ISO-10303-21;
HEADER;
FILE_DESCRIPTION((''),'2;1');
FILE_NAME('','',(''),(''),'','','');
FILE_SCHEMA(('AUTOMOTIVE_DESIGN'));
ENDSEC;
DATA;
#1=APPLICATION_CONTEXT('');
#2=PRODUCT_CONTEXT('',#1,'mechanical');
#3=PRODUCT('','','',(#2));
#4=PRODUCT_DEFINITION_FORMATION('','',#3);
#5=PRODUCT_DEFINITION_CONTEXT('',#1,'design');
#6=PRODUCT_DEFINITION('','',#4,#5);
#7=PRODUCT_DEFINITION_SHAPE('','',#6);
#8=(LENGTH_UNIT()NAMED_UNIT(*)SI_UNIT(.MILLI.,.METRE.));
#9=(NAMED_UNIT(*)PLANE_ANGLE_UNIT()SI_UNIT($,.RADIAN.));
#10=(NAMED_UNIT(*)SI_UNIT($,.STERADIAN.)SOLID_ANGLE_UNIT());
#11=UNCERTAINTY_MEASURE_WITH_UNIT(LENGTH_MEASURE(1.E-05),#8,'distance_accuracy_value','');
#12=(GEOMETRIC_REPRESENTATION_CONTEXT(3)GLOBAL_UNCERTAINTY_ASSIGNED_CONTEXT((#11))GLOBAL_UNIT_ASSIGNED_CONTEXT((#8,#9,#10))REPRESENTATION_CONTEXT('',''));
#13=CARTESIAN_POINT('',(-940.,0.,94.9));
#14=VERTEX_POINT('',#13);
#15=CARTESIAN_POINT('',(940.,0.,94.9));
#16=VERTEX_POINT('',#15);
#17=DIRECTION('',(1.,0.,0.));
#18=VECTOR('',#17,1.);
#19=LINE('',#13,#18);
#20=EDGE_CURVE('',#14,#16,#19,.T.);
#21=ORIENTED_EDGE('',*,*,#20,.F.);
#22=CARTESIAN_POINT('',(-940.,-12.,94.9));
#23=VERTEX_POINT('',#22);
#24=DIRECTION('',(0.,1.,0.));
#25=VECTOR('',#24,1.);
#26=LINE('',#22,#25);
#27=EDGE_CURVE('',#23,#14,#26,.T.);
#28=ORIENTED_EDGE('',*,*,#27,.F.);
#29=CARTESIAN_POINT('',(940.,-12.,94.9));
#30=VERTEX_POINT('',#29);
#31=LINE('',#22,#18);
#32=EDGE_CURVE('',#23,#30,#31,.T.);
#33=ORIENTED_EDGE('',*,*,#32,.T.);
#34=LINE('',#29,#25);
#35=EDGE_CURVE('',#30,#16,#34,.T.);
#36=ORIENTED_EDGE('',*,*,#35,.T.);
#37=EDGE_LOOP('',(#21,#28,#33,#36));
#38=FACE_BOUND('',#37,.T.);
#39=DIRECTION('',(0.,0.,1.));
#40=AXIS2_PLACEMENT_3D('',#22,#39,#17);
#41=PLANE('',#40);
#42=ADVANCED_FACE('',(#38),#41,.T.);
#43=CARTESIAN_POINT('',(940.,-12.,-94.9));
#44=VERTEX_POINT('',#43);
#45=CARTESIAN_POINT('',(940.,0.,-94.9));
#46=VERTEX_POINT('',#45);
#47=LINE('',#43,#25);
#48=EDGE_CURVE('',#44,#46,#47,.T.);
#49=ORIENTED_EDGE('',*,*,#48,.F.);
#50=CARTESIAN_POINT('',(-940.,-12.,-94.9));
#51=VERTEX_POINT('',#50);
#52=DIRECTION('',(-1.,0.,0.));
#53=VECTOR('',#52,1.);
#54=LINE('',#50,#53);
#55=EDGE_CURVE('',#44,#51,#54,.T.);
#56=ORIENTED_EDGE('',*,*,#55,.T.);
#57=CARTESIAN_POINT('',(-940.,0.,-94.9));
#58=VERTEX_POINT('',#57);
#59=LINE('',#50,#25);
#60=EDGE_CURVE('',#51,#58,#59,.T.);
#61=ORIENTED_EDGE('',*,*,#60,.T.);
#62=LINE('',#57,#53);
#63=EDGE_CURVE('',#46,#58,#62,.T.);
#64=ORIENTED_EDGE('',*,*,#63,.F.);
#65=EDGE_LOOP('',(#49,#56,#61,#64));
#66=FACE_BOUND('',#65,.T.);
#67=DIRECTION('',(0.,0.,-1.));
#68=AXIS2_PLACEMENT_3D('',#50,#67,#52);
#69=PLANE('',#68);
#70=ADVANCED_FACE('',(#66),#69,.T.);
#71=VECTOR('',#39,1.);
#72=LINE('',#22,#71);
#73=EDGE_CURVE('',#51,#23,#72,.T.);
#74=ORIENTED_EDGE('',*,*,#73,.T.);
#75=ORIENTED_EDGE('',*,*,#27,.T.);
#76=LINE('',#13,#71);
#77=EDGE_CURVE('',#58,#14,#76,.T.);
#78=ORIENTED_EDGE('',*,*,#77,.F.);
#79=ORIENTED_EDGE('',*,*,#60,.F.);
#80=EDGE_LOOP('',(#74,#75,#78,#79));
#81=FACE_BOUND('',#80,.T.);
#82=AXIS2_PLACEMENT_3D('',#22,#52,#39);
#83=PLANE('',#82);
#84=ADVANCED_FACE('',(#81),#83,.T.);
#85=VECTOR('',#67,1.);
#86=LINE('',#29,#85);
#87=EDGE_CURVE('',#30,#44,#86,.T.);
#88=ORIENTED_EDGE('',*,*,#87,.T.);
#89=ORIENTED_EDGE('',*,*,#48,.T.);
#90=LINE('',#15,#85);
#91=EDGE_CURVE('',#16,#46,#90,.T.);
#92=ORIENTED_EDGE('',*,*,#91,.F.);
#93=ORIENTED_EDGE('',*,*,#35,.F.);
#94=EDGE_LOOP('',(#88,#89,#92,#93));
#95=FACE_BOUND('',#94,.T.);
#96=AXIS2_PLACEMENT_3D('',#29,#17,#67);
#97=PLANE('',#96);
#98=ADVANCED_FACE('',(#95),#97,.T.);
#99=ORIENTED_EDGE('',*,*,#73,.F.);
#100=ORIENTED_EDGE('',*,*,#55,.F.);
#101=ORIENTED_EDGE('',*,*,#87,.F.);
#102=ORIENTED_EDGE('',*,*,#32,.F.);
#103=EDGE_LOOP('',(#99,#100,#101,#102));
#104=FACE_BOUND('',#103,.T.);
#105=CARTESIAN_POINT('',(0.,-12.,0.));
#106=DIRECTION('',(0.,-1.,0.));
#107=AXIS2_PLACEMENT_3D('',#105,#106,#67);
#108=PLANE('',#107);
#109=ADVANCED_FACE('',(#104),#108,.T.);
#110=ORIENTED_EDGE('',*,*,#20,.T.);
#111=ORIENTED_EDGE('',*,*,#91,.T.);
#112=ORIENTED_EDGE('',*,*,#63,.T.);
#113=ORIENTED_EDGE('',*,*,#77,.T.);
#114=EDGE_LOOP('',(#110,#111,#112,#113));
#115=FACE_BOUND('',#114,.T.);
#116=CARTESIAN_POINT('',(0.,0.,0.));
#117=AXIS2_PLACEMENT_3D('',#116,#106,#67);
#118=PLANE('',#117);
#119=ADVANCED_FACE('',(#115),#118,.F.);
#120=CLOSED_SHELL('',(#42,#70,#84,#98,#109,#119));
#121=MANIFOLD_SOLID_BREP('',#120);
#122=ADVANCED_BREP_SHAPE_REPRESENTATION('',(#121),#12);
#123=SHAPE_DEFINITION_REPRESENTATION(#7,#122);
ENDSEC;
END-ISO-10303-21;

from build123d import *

# Parameters (mm, degrees)
SKETCH1_W          = 1880
SKETCH1_H          = 189.8
BASE_FLANGE1_DEPTH = 12


# Sheet-metal steps are written as plain solids
with BuildPart() as part:
    # Sketch1 → Base-Flange1 (new body)
    with BuildSketch(Plane(origin=(0, 0, 0), x_dir=(1, 0, 0), z_dir=(0, 1, 0))):
        Rectangle(SKETCH1_W, SKETCH1_H)
    extrude(amount=-BASE_FLANGE1_DEPTH)


solid = part.part
